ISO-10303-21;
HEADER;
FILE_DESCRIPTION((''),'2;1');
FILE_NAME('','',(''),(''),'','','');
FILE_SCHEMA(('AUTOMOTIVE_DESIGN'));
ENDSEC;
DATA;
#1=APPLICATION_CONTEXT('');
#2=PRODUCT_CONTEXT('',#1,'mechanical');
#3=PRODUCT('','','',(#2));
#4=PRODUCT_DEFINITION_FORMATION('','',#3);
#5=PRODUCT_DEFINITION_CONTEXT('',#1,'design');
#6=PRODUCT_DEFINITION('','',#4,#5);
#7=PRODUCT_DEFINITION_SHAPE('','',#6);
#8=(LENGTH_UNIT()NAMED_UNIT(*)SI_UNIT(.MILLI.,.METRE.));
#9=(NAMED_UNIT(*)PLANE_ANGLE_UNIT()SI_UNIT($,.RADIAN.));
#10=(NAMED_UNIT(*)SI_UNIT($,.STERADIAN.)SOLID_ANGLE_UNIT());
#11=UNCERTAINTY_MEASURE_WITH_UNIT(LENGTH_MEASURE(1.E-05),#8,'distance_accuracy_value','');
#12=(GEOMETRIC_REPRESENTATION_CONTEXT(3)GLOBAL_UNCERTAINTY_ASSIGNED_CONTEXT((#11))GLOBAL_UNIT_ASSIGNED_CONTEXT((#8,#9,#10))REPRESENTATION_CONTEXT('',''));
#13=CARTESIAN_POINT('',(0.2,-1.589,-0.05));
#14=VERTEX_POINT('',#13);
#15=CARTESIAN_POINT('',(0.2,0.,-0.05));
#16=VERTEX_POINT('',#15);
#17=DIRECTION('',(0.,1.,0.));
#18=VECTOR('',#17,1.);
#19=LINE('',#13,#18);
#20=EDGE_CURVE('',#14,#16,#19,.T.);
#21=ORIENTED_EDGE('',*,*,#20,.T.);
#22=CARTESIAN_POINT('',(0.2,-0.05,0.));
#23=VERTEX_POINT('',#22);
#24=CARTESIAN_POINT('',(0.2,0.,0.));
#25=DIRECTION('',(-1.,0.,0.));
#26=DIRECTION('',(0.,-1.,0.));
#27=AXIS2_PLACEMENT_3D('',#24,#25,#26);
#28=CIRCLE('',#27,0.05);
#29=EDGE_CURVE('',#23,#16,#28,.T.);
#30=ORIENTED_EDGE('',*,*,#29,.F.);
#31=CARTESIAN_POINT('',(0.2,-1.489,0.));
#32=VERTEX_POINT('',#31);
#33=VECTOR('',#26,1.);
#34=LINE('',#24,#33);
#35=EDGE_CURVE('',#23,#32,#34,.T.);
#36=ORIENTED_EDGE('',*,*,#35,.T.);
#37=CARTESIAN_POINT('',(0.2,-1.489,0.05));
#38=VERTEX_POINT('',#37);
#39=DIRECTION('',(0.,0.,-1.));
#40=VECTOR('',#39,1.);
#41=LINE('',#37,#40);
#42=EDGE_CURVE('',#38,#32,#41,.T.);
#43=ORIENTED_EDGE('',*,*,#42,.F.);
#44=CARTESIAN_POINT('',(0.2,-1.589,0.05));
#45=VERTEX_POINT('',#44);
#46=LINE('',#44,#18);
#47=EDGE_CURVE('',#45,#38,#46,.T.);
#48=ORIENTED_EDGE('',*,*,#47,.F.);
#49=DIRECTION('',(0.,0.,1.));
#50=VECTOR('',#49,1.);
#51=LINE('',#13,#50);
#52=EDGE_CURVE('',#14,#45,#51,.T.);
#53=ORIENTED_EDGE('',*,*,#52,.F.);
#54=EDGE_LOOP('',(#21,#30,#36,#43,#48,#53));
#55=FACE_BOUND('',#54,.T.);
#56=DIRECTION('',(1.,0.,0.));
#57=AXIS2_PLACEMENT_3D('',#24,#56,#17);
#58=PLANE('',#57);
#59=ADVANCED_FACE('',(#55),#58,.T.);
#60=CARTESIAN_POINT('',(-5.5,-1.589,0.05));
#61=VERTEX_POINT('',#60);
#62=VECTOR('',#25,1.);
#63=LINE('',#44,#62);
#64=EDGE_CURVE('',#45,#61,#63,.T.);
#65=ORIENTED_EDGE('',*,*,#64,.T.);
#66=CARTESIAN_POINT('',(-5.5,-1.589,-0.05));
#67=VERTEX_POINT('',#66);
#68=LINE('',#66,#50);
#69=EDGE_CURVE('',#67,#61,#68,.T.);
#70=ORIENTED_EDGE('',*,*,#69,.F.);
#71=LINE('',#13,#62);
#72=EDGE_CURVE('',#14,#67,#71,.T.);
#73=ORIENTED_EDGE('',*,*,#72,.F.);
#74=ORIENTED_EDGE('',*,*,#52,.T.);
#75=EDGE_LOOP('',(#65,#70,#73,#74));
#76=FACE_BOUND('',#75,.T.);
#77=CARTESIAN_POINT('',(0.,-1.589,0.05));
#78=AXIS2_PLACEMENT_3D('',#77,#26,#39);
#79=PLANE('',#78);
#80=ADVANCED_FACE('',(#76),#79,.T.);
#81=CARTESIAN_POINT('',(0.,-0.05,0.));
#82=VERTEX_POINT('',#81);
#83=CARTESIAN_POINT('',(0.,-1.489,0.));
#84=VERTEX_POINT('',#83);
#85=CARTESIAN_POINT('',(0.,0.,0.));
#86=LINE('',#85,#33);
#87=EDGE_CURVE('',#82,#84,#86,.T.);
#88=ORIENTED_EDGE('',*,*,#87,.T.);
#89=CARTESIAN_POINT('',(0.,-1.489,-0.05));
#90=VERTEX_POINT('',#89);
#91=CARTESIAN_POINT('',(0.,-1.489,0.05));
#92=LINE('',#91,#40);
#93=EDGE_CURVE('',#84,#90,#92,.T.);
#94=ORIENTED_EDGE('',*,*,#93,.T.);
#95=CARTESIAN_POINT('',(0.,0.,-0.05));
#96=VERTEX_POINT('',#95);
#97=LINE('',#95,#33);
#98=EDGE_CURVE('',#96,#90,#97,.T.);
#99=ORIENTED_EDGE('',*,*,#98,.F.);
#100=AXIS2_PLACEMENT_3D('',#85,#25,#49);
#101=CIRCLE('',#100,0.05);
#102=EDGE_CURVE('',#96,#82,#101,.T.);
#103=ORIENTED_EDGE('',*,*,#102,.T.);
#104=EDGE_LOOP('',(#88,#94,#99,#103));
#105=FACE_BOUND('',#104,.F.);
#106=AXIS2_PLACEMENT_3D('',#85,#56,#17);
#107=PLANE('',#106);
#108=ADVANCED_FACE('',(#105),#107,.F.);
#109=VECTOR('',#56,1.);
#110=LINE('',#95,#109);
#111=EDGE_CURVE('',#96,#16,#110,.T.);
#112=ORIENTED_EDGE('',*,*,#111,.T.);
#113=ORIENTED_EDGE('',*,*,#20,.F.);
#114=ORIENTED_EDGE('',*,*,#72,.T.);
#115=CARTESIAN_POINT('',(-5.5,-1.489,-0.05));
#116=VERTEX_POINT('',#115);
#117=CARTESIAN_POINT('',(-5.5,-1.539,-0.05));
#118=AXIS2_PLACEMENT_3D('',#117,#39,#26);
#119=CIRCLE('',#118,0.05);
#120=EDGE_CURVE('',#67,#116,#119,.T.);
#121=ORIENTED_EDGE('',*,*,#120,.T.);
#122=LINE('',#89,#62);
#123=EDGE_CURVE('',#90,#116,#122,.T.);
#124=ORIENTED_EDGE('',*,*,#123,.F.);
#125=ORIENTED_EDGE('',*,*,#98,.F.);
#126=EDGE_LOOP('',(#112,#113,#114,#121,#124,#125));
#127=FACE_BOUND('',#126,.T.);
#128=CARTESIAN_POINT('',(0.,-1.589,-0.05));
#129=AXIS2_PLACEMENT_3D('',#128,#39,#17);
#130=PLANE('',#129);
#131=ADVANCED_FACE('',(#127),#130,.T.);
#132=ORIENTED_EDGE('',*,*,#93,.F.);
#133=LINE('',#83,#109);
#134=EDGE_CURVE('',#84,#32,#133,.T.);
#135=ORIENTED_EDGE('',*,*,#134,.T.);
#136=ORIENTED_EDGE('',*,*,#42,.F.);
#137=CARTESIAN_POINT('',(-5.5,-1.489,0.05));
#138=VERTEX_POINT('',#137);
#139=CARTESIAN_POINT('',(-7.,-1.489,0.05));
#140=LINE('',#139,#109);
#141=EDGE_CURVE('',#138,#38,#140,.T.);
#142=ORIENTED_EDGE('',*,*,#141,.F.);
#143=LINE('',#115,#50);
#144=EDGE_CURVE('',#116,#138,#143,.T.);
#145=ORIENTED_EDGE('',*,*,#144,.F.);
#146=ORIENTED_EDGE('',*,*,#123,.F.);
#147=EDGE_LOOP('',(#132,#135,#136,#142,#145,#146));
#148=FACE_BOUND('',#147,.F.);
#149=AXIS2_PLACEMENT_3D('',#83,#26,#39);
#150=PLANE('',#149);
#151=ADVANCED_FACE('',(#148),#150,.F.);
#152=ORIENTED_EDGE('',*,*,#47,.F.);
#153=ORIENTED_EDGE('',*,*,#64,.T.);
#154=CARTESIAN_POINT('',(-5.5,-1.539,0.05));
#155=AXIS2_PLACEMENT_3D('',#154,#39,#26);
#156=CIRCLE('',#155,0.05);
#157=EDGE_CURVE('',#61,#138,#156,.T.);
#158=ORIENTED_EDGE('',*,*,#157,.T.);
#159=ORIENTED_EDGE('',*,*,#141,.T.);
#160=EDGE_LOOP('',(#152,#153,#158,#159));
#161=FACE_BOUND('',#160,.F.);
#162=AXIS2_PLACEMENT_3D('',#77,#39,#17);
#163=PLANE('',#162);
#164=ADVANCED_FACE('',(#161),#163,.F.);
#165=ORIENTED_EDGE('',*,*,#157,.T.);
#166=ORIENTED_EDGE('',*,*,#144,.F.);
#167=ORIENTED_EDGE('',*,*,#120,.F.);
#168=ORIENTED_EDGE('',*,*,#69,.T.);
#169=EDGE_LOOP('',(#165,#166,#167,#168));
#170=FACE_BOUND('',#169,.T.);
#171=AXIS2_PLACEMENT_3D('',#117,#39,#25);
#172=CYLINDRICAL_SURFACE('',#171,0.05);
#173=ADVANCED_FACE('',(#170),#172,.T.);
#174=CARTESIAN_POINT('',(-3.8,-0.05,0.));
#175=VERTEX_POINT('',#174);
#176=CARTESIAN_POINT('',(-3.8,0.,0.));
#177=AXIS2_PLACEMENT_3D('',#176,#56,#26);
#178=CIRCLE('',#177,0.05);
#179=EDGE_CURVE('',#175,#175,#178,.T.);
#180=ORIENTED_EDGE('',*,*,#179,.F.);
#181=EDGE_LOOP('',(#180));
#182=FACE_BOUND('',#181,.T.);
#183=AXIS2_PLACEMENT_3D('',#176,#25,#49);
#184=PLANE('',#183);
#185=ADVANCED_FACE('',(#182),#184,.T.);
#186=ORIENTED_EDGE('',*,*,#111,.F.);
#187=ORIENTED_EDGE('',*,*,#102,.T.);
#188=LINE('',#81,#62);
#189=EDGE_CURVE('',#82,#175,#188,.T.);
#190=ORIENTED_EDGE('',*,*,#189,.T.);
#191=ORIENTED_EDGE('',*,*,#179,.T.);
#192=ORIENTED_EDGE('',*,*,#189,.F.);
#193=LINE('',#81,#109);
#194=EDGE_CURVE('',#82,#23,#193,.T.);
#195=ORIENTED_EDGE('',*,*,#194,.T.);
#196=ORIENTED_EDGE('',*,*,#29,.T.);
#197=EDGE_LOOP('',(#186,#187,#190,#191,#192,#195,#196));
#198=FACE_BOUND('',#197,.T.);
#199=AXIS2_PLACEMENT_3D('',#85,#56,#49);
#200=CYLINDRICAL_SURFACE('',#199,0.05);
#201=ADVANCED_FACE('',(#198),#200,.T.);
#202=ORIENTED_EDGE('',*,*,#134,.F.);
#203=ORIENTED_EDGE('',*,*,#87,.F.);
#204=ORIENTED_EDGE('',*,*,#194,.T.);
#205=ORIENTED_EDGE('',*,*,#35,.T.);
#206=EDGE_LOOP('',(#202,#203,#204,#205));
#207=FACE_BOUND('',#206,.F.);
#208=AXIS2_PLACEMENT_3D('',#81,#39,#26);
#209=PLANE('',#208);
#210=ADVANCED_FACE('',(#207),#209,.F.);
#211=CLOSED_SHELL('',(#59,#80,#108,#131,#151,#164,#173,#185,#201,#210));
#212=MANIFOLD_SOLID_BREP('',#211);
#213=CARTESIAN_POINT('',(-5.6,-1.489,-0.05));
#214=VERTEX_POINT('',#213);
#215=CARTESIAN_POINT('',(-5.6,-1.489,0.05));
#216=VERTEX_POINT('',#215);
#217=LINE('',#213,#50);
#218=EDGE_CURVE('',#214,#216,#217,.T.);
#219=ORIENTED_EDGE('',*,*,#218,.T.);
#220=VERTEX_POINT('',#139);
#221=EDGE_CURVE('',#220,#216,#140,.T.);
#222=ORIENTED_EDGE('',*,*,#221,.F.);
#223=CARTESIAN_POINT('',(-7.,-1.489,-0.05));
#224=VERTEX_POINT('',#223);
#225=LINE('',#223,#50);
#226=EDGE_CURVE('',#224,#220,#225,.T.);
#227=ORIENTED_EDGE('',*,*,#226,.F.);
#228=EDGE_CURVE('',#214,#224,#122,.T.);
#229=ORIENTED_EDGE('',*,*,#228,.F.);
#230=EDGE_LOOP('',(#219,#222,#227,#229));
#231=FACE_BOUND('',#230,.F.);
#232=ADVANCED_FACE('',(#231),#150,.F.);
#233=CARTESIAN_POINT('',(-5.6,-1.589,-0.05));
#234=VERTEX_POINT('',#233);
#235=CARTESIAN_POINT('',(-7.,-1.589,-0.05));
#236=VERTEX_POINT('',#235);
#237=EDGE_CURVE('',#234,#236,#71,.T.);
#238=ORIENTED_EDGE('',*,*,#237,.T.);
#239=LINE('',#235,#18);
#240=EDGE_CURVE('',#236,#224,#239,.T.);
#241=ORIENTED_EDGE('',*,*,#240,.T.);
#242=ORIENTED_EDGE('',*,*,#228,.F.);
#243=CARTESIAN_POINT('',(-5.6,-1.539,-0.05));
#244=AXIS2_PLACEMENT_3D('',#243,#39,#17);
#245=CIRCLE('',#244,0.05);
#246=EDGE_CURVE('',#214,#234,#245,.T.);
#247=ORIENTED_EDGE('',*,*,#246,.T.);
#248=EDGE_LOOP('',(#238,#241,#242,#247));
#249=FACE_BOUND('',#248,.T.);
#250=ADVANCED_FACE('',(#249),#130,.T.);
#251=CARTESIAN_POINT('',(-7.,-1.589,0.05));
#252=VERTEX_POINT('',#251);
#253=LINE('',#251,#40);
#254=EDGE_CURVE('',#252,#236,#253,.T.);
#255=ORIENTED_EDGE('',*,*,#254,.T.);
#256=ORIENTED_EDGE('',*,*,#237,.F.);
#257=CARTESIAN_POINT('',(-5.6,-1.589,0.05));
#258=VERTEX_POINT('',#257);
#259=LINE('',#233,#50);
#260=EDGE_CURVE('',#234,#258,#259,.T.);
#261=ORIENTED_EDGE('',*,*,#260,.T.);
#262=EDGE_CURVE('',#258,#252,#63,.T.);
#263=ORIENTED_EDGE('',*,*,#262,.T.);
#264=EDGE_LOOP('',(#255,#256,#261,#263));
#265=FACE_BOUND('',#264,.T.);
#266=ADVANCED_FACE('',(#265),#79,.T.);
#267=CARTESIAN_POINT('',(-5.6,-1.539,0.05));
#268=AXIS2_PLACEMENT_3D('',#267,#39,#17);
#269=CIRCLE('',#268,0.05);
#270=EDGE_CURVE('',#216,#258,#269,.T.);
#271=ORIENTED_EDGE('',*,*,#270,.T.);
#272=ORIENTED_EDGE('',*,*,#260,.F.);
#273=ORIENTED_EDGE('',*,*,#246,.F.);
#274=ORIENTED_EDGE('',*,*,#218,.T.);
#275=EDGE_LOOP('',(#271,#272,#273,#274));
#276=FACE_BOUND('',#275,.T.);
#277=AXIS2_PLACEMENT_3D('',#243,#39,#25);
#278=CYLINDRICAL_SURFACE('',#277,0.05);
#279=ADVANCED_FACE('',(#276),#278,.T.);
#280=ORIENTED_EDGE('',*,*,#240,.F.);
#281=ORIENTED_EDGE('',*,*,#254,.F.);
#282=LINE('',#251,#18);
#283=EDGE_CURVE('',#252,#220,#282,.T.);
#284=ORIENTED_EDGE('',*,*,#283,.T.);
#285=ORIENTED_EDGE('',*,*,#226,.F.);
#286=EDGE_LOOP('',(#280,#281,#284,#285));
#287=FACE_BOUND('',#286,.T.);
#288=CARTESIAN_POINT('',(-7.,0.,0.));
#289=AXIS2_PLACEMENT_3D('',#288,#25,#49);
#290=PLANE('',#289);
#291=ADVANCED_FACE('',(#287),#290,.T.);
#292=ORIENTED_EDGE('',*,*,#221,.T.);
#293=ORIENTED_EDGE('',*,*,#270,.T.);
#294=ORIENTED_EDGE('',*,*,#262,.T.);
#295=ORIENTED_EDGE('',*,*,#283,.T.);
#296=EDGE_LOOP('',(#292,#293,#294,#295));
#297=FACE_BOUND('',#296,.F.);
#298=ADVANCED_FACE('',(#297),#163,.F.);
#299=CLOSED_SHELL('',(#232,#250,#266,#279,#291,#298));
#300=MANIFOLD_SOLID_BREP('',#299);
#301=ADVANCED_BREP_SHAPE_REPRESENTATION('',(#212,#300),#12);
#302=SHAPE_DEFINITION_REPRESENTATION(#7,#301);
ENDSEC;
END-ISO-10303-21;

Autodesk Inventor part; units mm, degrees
ref_plane "YZ Plane" through (0, 0, 0) normal (1, 0, 0) x (0, 1, 0)
ref_plane "XZ Plane" through (0, 0, 0) normal (0, 1, 0) x (-1, 0, 0)
ref_plane "XY Plane" through (0, 0, 0) normal (0, 0, 1) x (1, 0, 0)
sketch "Sketch1" plane through (0, 0, 0) normal (1, 0, 0) x (0, 1, 0)
  circle A0 centre (0, 0) radius 0.05
  line L0 (0, 0) -> (-1.539, 0)
  line L1 (-1.589, 0.05) -> (-1.489, 0.05)
  line L2 (-1.489, 0.05) -> (-1.489, -0.05)
  line L3 (-1.489, -0.05) -> (-1.589, -0.05)
  line L4 (-1.589, -0.05) -> (-1.589, 0.05)
  line L5 (-1.589, 0.05) -> (-1.489, -0.05) construction
  line L6 (-1.489, 0.05) -> (-1.589, -0.05) construction
  line L7 (-1.489, -0.05) -> (0, -0.05)
  point P0 (-0.05, 0)
  point P1 (-1.489, 0)
  dimension "d0" = 0.1
  dimension "d1" = 1.539
  dimension "d2" = 0.1
  dimension "d3" = 0.1
extrude "Extrusion1" add sketch "Sketch1" along normal blind 0.2
sketch "Sketch2" plane through (0, 0, 0) normal (-1, 0, 0) x (0, 0, 1)
  arc A0 (0, -0.05) -> (-0.05, 0) centre (0, 0) ccw projected
  circle A1 centre (0, 0) radius 0.05
  point P0 (-0.05, 0)
  point P1 (0, -0.05)
  dimension "d6" = 0.1
extrude "Extrusion2" add sketch "Sketch2" along normal blind 3.8
sketch "Sketch3" plane through (0, 0, 0) normal (-1, 0, 0) x (0, 0, 1)
  line L0 (-0.05, -1.589) -> (-0.05, 0) projected
  line L1 (0.05, -1.589) -> (-0.05, -1.589) projected
  line L2 (-0.05, -1.589) -> (0.05, -1.589)
  line L3 (0, -1.489) -> (0.05, -1.489) projected
  line L4 (0.05, -1.589) -> (0.05, -1.489)
  line L5 (0.05, -1.489) -> (-0.05, -1.489)
  line L6 (-0.05, -1.489) -> (-0.05, -1.589)
  point P0 (0, 0)
extrude "Extrusion3" add sketch "Sketch3" along normal blind 7
ref_plane "Work Plane1" through (-5.55, 0, 0) normal (1, 0, 0) x (0, 0, -1)
split body "Split1" result two bodies by plane through (-5.55, 0, 0) normal (1, 0, 0) first body at (-1.2667, -0.0285, 0.0093)
sketch "Sketch5" plane through (-7, -1.589, -0.05) normal (0, 0, -1) x (-1, 0, 0)
  line L0 (-1.45, 0.1) -> (-1.45, 0) projected
  line L1 (-1.45, 0.05) -> (-1.4, 0.05)
  circle A0 centre (-1.4, 0.05) radius 0.05
  line L2 (-1.45, 0) -> (-7.2, 0) projected
  line L3 (-1.45, 0) -> (-1.45, 0.1)
  line L4 (-7, 0.1) -> (-1.45, 0.1) projected
  line L5 (-1.45, 0.1) -> (-1.4, 0.1)
  line L6 (-1.45, 0.1) -> (0, 0.1) projected
  line L7 (-1.45, 0) -> (-1.4, 0)
  line L8 (-1.45, 0) -> (0, 0) projected
  point P0 (-7, 1.589)
  dimension "d14" = 0.05
extrude "Extrusion5" cut sketch "Sketch5" against normal blind 10 contours L5 A0 L0 | A0 L7 L0 bodies 3
sketch "Sketch6" plane through (0, -1.489, -0.05) normal (0, 0, -1) x (-1, 0, 0)
  line L0 (5.55, 0) -> (5.55, -0.1) projected
  line L1 (5.55, -0.05) -> (5.5, -0.05)
  circle A0 centre (5.5, -0.05) radius 0.05
  line L2 (0, 0) -> (5.55, 0) projected
  line L3 (5.5, 0) -> (5.55, 0)
  line L4 (5.55, -0.1) -> (-0.2, -0.1) projected
  line L5 (5.55, 0) -> (5.55, -0.1)
  line L6 (5.55, -0.1) -> (5.5, -0.1)
  point P0 (0, 1.489)
  dimension "d17" = 0.05
extrude "Extrusion6" cut sketch "Sketch6" against normal blind 10 contours L0 A0 L2 | L0 L4 A0 bodies 2
properties part number "Bone_16_10_Fix"
